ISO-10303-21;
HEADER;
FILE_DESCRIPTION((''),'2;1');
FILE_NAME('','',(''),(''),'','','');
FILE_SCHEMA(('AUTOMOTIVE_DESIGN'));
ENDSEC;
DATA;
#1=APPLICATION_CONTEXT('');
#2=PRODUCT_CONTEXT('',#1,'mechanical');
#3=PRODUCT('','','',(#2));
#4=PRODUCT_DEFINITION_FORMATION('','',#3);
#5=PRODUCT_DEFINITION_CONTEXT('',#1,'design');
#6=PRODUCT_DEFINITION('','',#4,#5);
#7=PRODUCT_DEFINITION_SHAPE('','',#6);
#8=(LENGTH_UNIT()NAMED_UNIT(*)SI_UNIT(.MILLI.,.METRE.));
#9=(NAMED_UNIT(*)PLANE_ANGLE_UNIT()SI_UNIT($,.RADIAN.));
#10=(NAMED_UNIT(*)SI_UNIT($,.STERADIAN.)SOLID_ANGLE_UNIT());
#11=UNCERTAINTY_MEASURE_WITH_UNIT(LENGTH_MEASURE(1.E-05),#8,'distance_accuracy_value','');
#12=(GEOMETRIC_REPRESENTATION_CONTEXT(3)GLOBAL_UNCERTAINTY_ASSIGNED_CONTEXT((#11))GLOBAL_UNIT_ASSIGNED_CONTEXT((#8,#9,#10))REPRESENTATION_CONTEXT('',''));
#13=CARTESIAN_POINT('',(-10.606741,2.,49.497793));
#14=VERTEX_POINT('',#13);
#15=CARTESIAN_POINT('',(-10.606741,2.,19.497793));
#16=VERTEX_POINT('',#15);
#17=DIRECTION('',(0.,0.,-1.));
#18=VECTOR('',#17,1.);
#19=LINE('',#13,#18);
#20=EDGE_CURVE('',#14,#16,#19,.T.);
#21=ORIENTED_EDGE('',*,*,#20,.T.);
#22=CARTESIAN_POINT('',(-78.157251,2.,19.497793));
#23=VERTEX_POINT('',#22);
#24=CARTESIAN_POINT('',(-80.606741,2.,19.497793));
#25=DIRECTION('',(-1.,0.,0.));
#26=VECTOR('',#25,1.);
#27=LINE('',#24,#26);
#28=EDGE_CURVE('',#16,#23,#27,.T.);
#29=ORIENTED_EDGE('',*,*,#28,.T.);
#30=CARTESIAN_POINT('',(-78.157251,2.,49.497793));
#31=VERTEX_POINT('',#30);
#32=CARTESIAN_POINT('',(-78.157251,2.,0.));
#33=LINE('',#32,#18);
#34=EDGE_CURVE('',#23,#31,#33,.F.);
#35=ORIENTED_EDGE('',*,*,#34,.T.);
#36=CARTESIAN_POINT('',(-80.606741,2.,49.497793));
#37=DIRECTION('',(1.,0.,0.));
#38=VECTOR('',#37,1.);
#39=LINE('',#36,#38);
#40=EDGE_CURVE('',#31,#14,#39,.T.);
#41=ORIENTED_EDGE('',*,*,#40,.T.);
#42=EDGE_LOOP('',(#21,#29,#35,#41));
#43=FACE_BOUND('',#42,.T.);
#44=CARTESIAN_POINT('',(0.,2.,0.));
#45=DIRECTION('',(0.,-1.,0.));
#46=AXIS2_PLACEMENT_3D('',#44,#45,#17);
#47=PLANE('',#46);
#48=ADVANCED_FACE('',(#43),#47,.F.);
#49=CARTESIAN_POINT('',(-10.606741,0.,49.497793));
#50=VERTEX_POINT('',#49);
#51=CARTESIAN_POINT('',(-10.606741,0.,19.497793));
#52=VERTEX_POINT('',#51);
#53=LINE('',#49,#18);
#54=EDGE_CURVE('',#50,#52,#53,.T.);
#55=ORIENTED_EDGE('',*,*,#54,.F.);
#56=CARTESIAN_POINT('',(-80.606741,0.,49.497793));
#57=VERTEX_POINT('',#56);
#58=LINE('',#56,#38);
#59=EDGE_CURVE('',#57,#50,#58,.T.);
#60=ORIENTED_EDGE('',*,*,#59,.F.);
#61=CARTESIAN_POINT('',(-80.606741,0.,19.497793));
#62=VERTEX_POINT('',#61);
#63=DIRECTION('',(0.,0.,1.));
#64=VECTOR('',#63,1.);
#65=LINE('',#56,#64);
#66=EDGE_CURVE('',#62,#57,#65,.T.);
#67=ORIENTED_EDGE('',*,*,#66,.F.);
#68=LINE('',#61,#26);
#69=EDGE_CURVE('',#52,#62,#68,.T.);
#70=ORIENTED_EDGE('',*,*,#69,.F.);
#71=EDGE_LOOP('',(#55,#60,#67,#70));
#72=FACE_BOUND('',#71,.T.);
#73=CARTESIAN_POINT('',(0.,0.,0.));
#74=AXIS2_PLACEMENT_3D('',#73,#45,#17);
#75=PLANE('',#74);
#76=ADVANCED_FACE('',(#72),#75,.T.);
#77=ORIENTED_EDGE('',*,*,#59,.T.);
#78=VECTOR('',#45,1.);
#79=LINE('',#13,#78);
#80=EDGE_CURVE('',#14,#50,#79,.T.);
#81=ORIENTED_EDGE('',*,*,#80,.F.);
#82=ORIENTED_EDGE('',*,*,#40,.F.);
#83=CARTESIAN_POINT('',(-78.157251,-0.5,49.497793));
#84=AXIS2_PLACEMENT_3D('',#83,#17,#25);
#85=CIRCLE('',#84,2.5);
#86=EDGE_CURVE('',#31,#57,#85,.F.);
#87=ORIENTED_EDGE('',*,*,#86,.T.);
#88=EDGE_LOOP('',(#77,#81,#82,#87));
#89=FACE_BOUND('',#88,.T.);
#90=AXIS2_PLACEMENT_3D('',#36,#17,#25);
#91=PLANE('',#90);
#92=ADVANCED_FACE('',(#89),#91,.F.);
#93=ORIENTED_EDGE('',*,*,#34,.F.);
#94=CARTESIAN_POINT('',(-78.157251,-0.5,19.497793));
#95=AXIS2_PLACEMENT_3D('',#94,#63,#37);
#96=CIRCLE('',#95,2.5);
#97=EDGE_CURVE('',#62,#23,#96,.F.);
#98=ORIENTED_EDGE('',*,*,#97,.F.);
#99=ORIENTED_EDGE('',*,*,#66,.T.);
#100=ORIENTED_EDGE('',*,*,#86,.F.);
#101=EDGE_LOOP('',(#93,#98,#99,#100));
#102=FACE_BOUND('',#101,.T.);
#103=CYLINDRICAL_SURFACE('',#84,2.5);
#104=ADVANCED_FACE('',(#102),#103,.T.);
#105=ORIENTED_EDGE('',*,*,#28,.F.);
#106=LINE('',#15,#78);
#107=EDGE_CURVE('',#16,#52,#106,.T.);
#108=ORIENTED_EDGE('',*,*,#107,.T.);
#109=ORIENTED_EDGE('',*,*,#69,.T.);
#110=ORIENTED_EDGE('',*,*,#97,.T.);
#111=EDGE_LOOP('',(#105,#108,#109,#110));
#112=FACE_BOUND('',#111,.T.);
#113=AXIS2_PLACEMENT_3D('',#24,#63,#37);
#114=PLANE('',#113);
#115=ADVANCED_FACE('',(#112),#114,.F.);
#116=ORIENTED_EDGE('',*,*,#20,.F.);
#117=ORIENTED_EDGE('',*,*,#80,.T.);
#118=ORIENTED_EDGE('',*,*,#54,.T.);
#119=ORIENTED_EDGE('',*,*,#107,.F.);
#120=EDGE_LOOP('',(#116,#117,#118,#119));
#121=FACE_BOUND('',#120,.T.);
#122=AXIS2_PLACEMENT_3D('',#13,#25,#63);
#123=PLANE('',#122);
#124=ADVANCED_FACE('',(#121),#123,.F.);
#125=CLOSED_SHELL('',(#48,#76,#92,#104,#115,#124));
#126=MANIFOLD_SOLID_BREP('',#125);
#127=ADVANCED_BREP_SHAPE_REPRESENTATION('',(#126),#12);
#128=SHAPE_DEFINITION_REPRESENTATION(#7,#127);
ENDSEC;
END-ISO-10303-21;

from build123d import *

# Parameters (mm, degrees)
SKETCH_1_W      = 70
SKETCH_1_H      = 30
EXTRUDE_1_DEPTH = 2
FILLET_1_R      = 2.5


with BuildPart() as part:
    # Эскиз1 → Бобышка-Вытянуть1 (new body)
    with BuildSketch(Plane(origin=(0, 0, 0), x_dir=(1, 0, 0), z_dir=(0, 1, 0))):
        with Locations((-45.606740844, -34.497792834)):
            Rectangle(SKETCH_1_W, SKETCH_1_H)
    extrude(amount=EXTRUDE_1_DEPTH)

    # Скругление1
    # the kernel refuses this fillet: 2.5 mm, written as the material it takes off along each edge
    with BuildSketch(Plane(origin=(-80.606740844, 2, 13.374068477), x_dir=(1.591615728102107e-12, -1.0, 0), z_dir=(0, 0, 1))) as fillet_1_piece_1:
        with BuildLine():
            CenterArc((2.5, 2.449489743), FILLET_1_R, 180, 78.463040967)
            Line((0, 2.449489743), (-0.05, 2.449489743))
            Line((-0.05, 2.449489743), (-0.05, 0))
            Line((-0.05, 0), (0, -0.05))
            ThreePointArc((0, -0.05), (1, -0.05), (1.99, -0.048989795))
            Line((1.99, -0.048989795), (2, 0))
        make_face()
    extrude(amount=42.247448714, mode=Mode.SUBTRACT)


solid = part.part
